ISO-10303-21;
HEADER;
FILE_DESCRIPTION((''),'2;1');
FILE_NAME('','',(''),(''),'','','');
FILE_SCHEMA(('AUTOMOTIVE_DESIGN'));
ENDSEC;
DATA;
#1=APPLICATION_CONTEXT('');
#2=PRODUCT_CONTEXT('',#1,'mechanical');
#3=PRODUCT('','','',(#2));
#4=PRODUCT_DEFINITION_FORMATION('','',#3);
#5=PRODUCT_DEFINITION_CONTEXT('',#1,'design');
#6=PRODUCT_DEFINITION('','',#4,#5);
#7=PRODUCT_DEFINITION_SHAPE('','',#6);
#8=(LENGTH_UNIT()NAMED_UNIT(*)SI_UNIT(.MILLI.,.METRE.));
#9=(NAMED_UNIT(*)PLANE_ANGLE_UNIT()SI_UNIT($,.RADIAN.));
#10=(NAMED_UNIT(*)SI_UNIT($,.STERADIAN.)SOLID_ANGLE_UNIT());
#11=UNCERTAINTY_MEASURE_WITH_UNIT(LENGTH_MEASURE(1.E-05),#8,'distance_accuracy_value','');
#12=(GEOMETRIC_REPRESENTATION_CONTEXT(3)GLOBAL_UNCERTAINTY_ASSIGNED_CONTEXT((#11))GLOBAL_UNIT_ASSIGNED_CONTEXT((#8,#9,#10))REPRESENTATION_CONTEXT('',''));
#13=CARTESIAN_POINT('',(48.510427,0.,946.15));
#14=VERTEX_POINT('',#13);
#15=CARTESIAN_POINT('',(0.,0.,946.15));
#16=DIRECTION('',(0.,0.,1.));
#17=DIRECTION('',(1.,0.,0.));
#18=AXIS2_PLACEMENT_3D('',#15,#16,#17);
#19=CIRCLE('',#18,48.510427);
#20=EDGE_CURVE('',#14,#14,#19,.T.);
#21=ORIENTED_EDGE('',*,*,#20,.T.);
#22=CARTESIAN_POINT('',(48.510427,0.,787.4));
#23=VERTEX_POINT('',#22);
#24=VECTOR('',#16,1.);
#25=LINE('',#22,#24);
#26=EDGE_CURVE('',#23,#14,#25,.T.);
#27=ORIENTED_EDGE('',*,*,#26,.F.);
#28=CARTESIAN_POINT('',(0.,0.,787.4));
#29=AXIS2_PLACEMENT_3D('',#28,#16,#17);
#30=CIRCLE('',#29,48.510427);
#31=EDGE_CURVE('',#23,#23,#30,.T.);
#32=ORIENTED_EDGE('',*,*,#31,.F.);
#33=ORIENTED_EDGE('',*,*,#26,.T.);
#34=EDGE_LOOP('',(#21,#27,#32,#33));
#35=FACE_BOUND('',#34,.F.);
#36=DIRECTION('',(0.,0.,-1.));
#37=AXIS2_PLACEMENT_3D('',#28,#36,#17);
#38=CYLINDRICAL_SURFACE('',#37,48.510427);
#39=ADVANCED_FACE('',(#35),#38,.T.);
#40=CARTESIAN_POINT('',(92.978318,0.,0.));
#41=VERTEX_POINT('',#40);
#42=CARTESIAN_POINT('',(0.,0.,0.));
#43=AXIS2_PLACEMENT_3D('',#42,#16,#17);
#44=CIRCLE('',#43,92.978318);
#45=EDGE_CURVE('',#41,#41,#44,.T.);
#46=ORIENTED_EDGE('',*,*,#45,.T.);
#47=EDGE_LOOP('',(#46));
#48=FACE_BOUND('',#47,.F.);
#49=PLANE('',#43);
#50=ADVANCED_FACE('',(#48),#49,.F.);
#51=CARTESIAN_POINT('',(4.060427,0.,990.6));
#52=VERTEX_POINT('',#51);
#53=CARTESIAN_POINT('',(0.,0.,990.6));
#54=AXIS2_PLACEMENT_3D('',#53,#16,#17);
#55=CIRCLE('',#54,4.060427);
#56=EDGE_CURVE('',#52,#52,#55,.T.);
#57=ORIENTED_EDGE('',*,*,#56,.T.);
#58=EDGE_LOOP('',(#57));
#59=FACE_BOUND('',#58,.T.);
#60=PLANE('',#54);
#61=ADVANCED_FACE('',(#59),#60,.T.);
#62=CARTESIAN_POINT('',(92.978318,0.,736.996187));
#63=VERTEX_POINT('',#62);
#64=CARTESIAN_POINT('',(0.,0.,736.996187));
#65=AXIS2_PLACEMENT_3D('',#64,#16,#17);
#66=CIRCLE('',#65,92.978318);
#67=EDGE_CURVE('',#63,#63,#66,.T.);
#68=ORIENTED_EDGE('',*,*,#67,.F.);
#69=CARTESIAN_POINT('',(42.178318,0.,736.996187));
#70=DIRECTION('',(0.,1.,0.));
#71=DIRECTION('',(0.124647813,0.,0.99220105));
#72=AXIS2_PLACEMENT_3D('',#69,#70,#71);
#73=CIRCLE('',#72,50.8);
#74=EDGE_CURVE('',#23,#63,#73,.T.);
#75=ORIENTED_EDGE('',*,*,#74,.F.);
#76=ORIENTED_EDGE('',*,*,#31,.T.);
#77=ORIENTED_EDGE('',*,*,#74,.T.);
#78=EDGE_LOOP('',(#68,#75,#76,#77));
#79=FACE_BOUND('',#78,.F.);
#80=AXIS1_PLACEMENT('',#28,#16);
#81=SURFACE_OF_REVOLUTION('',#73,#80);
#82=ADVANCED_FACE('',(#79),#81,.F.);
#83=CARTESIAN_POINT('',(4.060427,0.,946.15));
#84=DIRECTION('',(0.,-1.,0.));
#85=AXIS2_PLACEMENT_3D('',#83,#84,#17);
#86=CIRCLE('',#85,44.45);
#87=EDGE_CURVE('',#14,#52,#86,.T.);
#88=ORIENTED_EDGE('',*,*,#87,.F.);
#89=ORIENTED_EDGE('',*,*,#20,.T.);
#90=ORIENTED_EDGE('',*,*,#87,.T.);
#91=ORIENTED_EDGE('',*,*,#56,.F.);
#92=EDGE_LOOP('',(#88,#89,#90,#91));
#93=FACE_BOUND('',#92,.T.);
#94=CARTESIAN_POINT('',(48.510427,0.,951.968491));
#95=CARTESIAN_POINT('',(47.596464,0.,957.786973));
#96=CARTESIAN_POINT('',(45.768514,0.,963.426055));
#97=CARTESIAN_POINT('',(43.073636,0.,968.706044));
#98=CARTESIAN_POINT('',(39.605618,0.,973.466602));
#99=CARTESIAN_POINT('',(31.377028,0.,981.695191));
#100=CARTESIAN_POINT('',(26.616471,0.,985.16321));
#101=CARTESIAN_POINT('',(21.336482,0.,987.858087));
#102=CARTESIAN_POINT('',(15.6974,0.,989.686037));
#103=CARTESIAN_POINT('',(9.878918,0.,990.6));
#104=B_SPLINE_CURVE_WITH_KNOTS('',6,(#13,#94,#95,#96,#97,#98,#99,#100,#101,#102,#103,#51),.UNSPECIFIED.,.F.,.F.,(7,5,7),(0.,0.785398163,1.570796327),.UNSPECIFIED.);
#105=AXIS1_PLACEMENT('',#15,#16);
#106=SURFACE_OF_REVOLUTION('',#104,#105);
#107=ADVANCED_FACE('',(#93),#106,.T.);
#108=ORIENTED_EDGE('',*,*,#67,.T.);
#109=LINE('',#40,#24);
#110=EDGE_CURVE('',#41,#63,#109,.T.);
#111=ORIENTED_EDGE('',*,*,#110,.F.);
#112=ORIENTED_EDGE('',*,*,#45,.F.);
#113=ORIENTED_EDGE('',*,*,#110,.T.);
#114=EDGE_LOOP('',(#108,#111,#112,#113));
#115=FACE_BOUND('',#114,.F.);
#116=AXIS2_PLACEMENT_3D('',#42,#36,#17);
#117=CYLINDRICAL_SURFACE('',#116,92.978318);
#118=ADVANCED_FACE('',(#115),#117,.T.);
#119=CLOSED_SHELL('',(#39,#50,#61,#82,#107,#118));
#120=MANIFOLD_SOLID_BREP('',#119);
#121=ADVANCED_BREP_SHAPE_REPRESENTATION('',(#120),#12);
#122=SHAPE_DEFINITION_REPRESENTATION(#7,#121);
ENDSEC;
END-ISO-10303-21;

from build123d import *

# Parameters (mm, degrees)
F0_R     = 92.9783177543
F1_DEPTH = 787.4
F2_R     = 48.5104266544
F3_DEPTH = 203.2
F4_R     = 44.45


# Not quite as in the source:
# - a fillet or chamfer that OpenCascade refuses, or shapes differently, is made with other operations: its cross-section is extruded or revolved along the edge and cut away or added


with BuildPart() as f1:
    # F0 (on Top) → F1 (new body)
    with BuildSketch(Plane.XY):
        Circle(F0_R)
    extrude(amount=F1_DEPTH)

    # F2 (on face) → F3 (join)
    with BuildSketch(Plane.XY.offset(787.4)):
        Circle(F2_R)
    extrude(amount=F3_DEPTH)

    # F4
    f4_edges = [f1.edges().sort_by_distance(p)[0] for p in [
        (-48.510427, 0, 990.6),
    ]]
    fillet(f4_edges, radius=F4_R)

    # F5: fillet of radius 50.8 on 1 edges, made by hand

    # F5_s1 → F5_t2 (revolve, cut)
    with BuildSketch(Plane.XZ):
        with BuildLine():
            ThreePointArc((48.5104266544, 787.4), (80.2723535875, 770.6039898535), (92.9783177543, 736.9961866832))
            Line((92.9783177543, 736.9961866832), (92.9783177543, 787.4))
            Line((92.9783177543, 787.4), (48.5104266544, 787.4))
        make_face()
    revolve(axis=Axis((0, 0, 787.4), (0, 0, 1)), mode=Mode.SUBTRACT)


solid = f1.part
